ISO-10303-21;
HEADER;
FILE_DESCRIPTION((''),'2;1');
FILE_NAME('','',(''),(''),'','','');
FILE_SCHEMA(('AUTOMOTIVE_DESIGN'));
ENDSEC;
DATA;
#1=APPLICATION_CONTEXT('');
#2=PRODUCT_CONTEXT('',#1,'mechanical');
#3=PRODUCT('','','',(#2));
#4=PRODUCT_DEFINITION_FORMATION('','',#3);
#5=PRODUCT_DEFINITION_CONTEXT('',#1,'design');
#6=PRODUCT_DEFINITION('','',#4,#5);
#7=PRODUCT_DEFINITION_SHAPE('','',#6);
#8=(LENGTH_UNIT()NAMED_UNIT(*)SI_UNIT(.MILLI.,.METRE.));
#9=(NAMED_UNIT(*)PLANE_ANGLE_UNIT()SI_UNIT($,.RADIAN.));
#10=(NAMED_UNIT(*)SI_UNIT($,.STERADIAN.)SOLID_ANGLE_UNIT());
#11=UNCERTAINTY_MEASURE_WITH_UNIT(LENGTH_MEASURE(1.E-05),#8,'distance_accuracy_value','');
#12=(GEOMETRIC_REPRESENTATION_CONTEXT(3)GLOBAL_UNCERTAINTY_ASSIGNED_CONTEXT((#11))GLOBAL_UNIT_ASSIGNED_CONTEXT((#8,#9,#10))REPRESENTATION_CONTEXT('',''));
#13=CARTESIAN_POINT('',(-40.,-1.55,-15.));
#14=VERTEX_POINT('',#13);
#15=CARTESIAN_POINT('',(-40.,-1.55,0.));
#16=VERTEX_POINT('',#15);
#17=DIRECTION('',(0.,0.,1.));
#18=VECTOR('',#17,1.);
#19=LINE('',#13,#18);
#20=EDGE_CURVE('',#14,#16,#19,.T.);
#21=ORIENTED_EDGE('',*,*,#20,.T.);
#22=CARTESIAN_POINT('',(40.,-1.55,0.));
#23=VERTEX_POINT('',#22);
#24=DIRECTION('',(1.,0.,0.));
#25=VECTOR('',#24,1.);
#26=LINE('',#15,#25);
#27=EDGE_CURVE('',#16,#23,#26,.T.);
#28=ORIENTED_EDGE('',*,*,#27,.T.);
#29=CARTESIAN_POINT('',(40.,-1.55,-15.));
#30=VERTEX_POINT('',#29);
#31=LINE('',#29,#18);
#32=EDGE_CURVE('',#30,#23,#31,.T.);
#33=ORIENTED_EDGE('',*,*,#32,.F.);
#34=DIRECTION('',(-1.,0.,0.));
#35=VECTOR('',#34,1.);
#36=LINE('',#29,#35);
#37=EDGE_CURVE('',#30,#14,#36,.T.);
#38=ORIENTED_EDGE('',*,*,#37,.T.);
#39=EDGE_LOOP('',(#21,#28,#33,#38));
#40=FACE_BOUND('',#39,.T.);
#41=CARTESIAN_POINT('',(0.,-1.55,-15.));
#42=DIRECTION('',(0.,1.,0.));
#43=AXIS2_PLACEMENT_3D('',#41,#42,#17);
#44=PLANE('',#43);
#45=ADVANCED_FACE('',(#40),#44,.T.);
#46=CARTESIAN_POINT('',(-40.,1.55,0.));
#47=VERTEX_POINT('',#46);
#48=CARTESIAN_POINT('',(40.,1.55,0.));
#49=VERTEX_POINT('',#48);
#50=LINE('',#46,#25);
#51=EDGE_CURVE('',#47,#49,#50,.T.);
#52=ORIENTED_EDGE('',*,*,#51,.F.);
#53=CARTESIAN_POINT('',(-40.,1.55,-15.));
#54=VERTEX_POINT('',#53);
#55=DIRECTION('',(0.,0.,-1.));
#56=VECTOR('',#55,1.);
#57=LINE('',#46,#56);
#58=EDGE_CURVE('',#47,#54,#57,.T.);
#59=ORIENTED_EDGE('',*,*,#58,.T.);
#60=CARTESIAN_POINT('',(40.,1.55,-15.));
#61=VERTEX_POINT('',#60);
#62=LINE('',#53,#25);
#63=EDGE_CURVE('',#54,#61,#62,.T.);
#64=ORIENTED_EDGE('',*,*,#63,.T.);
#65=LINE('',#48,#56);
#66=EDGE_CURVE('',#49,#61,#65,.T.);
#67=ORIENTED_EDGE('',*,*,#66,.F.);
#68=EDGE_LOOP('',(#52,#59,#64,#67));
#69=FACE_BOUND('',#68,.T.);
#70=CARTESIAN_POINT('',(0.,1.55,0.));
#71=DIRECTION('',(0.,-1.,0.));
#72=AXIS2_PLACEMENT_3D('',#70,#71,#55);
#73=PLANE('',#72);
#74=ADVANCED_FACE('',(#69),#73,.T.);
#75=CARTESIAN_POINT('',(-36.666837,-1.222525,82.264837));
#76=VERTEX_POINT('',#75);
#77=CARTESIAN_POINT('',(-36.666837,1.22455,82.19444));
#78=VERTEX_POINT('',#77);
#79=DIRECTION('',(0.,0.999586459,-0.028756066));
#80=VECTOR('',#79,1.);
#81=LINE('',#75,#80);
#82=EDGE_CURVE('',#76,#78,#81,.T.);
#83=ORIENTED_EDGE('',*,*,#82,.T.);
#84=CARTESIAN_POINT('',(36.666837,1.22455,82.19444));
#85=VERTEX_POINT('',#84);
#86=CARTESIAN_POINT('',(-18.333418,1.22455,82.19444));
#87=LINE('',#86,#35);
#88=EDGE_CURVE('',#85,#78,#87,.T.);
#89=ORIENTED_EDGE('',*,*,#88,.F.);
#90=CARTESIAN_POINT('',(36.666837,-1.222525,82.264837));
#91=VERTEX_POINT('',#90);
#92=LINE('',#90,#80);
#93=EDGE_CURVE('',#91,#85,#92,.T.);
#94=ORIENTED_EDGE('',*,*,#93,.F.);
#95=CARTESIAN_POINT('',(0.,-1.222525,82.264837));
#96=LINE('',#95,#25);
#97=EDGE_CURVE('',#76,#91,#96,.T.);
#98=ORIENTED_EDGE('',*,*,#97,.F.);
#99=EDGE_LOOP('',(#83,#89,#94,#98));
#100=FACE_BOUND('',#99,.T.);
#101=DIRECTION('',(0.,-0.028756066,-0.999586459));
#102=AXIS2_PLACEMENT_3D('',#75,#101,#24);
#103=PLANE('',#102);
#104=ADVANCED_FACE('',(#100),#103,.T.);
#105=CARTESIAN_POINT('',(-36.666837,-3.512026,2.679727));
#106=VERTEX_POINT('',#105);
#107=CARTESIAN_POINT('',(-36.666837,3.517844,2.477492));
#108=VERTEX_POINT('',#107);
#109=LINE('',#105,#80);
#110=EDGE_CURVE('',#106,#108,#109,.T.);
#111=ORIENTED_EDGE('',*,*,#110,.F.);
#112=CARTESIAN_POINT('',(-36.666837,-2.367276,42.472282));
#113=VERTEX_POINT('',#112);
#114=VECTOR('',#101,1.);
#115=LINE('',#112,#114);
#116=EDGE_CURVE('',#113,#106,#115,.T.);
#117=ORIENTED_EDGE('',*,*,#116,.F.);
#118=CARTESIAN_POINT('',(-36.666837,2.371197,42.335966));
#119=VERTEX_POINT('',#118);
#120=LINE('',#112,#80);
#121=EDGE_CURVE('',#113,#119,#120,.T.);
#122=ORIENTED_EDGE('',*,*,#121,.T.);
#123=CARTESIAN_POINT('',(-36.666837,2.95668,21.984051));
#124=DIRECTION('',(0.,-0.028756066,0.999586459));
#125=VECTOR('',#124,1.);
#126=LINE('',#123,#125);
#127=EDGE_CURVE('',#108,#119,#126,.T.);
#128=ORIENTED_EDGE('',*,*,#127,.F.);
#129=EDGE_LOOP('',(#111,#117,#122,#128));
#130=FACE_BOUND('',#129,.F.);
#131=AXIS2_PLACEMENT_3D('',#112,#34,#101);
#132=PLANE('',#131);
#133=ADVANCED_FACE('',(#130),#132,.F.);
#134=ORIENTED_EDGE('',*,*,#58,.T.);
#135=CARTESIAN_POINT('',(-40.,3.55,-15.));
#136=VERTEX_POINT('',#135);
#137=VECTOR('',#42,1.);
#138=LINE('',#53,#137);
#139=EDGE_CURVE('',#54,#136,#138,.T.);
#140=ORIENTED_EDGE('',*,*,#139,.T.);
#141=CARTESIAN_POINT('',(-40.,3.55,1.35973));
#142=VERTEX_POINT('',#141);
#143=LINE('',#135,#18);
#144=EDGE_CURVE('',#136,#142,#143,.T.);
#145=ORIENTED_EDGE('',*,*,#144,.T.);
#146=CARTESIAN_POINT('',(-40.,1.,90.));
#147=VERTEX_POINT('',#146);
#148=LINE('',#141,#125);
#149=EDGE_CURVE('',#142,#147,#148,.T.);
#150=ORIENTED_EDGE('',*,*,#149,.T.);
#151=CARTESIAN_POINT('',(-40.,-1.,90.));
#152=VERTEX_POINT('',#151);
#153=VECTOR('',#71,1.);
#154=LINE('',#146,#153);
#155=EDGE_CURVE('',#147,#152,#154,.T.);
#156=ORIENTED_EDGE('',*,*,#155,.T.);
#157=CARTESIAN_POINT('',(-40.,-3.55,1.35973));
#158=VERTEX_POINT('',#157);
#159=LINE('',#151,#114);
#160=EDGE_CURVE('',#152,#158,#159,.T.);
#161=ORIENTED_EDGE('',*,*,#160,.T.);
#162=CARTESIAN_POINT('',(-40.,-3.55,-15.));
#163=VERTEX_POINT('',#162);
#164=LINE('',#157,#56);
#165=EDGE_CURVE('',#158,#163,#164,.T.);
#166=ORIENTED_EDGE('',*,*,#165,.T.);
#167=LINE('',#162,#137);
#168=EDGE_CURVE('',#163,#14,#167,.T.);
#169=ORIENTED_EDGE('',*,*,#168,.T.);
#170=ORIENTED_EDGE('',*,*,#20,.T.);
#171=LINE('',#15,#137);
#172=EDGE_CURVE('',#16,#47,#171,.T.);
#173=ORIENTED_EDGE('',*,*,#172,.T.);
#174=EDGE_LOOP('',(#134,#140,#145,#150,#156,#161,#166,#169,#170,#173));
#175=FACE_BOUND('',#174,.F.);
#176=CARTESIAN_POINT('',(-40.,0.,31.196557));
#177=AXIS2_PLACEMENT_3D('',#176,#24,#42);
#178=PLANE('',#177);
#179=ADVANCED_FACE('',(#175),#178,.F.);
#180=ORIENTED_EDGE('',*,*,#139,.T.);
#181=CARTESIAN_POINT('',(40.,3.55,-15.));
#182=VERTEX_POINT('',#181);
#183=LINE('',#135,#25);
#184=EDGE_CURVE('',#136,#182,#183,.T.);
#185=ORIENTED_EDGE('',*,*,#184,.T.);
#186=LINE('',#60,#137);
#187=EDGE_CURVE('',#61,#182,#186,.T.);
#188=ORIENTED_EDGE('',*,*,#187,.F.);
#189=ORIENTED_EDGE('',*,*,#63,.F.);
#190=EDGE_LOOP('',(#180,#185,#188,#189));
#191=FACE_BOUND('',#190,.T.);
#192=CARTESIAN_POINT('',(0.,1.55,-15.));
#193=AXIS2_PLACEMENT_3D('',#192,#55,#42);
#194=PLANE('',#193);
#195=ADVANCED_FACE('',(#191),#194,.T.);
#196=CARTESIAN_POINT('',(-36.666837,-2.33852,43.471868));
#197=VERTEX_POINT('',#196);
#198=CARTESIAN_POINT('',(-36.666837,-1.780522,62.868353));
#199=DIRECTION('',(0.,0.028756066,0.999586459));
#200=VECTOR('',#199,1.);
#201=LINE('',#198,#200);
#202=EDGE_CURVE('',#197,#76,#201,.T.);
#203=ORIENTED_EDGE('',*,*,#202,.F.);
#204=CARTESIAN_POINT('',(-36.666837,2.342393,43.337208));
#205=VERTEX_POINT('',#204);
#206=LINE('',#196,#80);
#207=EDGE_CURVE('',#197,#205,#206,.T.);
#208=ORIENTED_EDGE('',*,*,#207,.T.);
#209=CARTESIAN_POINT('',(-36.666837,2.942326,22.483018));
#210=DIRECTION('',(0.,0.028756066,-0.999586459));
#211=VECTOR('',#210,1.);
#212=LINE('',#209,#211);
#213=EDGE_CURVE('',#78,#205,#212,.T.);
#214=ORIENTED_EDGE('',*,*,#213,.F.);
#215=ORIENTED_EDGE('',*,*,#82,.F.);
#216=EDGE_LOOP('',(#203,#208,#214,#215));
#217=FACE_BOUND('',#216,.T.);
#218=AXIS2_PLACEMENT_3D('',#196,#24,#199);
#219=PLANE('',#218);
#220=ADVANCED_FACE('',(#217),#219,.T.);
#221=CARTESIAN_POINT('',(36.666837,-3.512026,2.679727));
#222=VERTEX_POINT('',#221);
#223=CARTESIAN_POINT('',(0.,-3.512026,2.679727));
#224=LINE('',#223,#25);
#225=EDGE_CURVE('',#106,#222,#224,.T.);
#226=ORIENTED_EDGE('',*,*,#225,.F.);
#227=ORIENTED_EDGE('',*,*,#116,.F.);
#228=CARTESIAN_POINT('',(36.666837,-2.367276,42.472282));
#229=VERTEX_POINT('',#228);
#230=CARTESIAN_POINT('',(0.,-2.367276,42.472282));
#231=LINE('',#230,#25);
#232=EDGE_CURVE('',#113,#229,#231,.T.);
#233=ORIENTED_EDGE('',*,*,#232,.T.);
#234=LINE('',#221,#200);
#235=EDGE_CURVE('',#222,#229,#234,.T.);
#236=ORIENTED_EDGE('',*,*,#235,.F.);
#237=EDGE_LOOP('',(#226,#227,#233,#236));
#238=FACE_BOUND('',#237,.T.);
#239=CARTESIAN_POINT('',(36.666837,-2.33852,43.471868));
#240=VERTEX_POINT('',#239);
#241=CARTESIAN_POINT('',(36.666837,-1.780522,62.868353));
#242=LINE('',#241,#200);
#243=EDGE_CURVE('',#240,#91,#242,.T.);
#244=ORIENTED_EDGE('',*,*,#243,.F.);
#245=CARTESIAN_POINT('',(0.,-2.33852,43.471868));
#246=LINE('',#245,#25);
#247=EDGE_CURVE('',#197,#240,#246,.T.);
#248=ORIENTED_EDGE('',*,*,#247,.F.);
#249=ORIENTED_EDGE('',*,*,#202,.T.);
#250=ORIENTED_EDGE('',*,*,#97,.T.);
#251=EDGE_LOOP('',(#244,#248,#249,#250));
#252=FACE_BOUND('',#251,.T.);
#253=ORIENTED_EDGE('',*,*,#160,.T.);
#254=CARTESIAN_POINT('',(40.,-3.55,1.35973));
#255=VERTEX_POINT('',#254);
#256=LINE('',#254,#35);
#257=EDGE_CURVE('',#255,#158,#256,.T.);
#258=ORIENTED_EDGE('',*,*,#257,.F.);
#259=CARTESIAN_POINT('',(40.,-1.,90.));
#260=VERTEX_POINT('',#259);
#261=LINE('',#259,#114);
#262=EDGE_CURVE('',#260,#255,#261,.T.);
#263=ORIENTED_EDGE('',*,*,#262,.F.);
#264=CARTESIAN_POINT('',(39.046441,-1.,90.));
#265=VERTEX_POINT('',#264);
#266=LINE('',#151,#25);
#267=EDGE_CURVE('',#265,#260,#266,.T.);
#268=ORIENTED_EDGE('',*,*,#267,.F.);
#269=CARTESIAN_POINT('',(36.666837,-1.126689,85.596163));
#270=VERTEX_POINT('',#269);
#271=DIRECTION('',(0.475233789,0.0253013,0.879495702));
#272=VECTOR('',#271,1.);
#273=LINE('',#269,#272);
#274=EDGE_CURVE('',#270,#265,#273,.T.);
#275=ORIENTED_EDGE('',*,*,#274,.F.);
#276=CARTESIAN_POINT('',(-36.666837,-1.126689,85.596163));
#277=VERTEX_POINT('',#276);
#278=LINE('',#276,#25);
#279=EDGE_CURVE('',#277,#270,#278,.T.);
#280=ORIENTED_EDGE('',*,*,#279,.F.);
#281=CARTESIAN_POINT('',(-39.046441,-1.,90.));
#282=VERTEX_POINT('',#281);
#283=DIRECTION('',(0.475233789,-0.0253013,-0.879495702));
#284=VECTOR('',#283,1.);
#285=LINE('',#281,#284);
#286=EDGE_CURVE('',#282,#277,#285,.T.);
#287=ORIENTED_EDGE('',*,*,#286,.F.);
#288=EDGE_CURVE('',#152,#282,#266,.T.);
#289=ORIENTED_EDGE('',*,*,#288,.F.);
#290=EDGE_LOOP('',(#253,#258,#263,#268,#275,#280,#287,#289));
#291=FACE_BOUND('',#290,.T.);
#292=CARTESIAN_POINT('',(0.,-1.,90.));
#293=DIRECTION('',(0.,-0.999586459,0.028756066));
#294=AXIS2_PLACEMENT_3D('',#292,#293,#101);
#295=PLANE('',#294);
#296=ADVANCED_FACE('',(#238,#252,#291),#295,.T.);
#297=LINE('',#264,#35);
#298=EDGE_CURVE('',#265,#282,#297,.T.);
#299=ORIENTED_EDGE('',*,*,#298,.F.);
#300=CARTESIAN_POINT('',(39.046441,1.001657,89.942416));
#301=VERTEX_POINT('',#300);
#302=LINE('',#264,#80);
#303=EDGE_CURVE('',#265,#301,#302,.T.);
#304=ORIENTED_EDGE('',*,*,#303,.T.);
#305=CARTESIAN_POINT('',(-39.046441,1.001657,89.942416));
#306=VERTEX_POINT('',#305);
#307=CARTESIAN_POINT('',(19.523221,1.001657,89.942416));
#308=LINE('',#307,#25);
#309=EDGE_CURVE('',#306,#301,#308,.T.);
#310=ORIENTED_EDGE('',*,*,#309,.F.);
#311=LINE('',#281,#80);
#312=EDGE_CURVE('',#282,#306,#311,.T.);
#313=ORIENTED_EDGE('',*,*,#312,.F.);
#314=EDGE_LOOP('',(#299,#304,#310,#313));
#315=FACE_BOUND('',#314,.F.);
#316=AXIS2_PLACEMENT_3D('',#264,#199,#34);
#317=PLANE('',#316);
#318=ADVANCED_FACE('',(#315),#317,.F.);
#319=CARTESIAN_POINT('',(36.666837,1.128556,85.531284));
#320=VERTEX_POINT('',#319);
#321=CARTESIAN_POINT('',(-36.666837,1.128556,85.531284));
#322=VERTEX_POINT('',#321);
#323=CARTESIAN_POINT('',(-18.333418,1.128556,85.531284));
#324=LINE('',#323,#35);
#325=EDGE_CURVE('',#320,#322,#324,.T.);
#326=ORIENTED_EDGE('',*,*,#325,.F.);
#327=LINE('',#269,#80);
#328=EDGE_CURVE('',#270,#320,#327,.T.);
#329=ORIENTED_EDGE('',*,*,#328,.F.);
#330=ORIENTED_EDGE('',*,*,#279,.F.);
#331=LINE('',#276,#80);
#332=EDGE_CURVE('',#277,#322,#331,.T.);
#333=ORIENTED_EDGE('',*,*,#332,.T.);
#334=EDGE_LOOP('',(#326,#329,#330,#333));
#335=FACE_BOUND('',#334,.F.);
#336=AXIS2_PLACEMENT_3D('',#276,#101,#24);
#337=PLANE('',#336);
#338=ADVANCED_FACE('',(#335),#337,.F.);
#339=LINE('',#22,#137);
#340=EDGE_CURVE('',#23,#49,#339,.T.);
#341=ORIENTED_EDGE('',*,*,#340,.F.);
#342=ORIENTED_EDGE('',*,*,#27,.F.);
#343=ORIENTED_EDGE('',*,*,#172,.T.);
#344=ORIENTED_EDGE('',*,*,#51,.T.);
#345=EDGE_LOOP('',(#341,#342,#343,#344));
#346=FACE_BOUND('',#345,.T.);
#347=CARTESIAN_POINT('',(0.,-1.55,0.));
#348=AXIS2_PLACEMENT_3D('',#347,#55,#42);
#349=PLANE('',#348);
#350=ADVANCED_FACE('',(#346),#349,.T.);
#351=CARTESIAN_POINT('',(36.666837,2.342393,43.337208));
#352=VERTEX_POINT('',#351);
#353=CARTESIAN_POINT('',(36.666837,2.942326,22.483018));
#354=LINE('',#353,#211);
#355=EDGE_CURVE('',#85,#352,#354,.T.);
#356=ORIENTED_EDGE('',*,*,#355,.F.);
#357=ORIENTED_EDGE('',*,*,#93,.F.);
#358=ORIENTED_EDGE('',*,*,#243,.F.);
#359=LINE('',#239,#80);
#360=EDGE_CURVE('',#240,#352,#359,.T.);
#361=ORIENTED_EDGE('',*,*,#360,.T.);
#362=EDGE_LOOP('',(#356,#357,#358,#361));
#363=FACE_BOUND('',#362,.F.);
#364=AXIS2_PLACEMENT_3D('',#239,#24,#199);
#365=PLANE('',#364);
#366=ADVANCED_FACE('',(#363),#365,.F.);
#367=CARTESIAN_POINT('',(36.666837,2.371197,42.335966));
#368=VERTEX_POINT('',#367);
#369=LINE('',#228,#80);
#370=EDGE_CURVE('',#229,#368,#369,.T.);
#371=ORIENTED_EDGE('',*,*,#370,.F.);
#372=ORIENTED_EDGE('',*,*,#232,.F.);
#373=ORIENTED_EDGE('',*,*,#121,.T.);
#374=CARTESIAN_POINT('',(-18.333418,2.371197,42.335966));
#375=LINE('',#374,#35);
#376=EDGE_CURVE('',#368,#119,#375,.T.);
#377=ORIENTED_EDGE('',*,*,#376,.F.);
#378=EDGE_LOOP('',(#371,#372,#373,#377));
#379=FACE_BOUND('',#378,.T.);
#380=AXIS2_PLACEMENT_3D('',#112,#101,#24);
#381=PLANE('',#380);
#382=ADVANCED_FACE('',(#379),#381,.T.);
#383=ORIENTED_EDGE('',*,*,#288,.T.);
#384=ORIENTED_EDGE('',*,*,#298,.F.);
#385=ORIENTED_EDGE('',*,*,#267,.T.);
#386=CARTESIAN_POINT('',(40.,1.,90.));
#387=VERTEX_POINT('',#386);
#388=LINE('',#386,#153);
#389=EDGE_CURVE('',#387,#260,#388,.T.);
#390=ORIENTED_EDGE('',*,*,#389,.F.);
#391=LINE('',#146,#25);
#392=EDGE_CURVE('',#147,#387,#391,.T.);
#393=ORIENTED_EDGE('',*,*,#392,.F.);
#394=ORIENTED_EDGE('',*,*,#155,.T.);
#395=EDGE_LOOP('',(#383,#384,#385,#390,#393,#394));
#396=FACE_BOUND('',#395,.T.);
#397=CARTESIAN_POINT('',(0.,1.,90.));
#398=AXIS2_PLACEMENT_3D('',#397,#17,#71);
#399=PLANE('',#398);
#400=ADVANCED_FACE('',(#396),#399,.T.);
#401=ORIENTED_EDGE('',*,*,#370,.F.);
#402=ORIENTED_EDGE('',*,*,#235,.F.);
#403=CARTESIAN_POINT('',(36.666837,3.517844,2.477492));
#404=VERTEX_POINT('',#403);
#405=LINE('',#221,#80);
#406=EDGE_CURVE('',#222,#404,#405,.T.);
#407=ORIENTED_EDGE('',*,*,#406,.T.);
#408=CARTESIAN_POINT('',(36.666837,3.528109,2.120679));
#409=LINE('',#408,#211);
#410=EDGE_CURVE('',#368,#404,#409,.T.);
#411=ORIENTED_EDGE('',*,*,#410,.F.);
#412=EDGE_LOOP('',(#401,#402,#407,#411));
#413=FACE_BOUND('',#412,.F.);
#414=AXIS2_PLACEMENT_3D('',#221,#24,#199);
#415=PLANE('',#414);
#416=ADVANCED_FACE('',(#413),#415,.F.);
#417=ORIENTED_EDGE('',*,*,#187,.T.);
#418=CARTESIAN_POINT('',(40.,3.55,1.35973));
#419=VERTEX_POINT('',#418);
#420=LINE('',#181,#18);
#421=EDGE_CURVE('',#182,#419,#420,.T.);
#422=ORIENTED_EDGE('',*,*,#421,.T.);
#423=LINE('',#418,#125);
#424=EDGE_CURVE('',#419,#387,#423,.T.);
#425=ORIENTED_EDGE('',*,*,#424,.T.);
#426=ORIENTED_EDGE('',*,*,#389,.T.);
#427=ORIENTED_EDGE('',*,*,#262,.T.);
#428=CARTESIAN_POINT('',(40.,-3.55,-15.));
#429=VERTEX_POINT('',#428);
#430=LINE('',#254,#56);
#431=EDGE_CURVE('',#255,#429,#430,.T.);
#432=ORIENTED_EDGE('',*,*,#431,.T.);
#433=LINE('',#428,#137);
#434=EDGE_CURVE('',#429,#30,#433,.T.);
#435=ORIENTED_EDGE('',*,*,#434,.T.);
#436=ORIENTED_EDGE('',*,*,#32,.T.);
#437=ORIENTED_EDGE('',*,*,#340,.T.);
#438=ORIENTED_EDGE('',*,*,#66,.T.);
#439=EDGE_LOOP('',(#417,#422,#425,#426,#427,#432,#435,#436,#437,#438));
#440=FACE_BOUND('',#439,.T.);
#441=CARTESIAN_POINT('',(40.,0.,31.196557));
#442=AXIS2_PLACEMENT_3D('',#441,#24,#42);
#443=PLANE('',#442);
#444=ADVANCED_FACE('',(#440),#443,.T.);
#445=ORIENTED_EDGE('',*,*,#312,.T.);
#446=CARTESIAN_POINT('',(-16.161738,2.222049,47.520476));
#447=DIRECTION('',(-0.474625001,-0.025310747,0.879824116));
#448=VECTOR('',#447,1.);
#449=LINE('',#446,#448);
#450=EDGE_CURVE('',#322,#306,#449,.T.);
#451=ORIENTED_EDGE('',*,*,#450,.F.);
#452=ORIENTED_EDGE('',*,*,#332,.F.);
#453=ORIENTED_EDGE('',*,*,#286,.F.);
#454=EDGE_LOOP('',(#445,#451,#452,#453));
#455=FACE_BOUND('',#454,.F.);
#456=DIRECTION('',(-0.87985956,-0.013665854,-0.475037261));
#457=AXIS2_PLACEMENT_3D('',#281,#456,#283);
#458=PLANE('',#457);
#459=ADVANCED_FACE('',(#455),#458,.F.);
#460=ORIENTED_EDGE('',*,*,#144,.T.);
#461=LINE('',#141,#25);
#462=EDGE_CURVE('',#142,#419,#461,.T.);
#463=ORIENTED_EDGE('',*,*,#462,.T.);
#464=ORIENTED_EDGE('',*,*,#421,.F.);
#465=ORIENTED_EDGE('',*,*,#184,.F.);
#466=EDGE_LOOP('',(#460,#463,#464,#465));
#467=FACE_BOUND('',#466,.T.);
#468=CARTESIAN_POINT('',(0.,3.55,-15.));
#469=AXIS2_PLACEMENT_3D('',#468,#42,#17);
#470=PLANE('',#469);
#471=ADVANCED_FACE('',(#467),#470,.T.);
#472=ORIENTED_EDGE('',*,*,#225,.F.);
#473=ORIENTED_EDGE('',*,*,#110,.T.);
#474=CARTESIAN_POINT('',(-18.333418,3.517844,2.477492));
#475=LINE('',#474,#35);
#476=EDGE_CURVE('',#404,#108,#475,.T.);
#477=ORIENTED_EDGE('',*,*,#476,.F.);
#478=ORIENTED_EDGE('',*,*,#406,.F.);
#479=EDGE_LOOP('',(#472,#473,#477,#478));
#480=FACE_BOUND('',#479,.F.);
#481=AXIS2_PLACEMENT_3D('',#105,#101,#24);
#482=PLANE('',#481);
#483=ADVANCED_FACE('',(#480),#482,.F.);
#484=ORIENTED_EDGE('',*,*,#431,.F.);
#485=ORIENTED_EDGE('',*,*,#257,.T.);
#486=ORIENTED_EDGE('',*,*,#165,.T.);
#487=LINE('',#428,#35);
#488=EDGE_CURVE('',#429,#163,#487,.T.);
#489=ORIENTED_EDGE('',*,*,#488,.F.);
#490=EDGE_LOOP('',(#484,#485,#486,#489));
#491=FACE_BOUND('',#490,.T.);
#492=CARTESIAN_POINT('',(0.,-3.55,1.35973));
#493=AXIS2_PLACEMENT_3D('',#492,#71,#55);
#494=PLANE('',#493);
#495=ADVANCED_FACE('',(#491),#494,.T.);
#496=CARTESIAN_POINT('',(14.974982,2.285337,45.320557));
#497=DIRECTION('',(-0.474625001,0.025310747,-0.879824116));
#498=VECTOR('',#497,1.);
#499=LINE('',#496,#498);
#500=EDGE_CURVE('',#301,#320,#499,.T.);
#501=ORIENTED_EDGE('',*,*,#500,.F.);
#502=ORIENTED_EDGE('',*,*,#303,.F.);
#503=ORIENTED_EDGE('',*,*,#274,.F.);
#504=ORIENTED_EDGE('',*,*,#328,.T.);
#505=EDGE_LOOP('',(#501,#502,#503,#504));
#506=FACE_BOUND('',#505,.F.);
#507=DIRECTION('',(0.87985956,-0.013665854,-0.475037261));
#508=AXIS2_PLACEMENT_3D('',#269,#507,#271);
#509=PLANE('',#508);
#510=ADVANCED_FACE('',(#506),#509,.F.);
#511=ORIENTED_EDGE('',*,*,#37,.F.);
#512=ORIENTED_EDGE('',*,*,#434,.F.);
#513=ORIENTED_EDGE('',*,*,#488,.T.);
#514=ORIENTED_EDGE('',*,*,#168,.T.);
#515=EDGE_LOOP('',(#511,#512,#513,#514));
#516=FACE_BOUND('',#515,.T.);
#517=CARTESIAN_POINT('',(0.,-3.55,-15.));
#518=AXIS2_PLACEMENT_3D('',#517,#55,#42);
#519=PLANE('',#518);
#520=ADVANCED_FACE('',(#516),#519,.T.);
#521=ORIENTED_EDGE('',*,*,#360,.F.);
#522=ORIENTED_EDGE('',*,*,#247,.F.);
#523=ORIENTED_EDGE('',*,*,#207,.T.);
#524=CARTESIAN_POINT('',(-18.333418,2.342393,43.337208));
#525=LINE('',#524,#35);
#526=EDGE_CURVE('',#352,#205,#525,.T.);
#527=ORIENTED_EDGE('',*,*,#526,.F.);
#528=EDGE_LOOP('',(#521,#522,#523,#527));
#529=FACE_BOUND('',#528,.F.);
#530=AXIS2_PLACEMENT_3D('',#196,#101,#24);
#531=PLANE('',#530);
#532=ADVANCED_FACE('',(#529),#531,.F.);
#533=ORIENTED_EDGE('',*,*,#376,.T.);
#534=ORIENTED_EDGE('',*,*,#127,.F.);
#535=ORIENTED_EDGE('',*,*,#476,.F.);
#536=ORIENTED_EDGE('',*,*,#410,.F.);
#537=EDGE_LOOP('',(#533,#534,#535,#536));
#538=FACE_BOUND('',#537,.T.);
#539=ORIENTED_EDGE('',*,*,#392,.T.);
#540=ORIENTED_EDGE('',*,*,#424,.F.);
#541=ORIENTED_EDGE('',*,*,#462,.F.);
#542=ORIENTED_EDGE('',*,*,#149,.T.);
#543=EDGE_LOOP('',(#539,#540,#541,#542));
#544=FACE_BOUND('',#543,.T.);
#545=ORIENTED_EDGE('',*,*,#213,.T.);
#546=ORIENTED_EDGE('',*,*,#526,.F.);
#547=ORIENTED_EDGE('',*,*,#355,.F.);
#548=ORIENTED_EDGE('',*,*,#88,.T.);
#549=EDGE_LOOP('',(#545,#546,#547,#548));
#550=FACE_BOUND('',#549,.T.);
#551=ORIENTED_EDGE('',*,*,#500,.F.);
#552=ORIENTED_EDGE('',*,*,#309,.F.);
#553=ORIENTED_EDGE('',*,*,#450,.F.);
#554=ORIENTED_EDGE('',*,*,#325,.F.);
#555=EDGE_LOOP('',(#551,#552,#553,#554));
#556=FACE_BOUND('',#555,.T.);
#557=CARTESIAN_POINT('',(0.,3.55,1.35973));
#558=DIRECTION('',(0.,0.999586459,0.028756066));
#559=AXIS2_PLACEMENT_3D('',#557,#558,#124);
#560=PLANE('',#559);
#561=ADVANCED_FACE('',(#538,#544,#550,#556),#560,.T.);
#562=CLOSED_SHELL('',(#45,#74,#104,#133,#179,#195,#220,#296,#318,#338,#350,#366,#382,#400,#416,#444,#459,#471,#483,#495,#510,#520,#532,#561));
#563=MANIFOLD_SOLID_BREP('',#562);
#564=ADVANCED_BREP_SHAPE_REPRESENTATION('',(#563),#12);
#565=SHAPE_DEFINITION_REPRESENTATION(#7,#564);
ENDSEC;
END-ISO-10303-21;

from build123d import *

# Parameters (mm, degrees)
F1_DEPTH = 40
F2_W     = 73.3336731791
F2_H     = 38.809017675
F2_H_2   = 1
F3_DEPTH = 7.5685053212


# Not quite as in the source:
# - a feature names something its author has since deleted; it is built from what else it names


with BuildPart() as f1:
    # F0 (on Right) → F1 (new body, symmetric)
    with BuildSketch(Plane.YZ):
        Polygon((-1.55, -15), (-1.55, 0), (1.55, 0), (1.55, -15), (3.55, -15), (3.55, 1.359729562), (1, 90), (-1, 90), (-3.55, 1.359729562), (-3.55, 0), (-3.55, -15), align=None)
    extrude(amount=F1_DEPTH, both=True)

    # F2 (on face) → F3 (cut, through all)
    with BuildSketch(Plane(origin=(0, -3.5861487682, 0.1031661943), x_dir=(1, 0, 0), z_dir=(0, -0.9995864588, 0.028756066))):
        Polygon((36.6668365896, 85.5283662677), (39.0464413553, 89.9340252282), (-39.0464413553, 89.9340252282), (-36.6668365896, 85.5283662677), align=None)
        with Locations((0, 62.7911531245)):
            Rectangle(F2_W, F2_H)
        with Locations((0, 41.886644287)):
            Rectangle(F2_W, F2_H_2)
        with Locations((0, 21.9821354495)):
            Rectangle(F2_W, F2_H)
    extrude(amount=-F3_DEPTH, mode=Mode.SUBTRACT)


solid = f1.part
